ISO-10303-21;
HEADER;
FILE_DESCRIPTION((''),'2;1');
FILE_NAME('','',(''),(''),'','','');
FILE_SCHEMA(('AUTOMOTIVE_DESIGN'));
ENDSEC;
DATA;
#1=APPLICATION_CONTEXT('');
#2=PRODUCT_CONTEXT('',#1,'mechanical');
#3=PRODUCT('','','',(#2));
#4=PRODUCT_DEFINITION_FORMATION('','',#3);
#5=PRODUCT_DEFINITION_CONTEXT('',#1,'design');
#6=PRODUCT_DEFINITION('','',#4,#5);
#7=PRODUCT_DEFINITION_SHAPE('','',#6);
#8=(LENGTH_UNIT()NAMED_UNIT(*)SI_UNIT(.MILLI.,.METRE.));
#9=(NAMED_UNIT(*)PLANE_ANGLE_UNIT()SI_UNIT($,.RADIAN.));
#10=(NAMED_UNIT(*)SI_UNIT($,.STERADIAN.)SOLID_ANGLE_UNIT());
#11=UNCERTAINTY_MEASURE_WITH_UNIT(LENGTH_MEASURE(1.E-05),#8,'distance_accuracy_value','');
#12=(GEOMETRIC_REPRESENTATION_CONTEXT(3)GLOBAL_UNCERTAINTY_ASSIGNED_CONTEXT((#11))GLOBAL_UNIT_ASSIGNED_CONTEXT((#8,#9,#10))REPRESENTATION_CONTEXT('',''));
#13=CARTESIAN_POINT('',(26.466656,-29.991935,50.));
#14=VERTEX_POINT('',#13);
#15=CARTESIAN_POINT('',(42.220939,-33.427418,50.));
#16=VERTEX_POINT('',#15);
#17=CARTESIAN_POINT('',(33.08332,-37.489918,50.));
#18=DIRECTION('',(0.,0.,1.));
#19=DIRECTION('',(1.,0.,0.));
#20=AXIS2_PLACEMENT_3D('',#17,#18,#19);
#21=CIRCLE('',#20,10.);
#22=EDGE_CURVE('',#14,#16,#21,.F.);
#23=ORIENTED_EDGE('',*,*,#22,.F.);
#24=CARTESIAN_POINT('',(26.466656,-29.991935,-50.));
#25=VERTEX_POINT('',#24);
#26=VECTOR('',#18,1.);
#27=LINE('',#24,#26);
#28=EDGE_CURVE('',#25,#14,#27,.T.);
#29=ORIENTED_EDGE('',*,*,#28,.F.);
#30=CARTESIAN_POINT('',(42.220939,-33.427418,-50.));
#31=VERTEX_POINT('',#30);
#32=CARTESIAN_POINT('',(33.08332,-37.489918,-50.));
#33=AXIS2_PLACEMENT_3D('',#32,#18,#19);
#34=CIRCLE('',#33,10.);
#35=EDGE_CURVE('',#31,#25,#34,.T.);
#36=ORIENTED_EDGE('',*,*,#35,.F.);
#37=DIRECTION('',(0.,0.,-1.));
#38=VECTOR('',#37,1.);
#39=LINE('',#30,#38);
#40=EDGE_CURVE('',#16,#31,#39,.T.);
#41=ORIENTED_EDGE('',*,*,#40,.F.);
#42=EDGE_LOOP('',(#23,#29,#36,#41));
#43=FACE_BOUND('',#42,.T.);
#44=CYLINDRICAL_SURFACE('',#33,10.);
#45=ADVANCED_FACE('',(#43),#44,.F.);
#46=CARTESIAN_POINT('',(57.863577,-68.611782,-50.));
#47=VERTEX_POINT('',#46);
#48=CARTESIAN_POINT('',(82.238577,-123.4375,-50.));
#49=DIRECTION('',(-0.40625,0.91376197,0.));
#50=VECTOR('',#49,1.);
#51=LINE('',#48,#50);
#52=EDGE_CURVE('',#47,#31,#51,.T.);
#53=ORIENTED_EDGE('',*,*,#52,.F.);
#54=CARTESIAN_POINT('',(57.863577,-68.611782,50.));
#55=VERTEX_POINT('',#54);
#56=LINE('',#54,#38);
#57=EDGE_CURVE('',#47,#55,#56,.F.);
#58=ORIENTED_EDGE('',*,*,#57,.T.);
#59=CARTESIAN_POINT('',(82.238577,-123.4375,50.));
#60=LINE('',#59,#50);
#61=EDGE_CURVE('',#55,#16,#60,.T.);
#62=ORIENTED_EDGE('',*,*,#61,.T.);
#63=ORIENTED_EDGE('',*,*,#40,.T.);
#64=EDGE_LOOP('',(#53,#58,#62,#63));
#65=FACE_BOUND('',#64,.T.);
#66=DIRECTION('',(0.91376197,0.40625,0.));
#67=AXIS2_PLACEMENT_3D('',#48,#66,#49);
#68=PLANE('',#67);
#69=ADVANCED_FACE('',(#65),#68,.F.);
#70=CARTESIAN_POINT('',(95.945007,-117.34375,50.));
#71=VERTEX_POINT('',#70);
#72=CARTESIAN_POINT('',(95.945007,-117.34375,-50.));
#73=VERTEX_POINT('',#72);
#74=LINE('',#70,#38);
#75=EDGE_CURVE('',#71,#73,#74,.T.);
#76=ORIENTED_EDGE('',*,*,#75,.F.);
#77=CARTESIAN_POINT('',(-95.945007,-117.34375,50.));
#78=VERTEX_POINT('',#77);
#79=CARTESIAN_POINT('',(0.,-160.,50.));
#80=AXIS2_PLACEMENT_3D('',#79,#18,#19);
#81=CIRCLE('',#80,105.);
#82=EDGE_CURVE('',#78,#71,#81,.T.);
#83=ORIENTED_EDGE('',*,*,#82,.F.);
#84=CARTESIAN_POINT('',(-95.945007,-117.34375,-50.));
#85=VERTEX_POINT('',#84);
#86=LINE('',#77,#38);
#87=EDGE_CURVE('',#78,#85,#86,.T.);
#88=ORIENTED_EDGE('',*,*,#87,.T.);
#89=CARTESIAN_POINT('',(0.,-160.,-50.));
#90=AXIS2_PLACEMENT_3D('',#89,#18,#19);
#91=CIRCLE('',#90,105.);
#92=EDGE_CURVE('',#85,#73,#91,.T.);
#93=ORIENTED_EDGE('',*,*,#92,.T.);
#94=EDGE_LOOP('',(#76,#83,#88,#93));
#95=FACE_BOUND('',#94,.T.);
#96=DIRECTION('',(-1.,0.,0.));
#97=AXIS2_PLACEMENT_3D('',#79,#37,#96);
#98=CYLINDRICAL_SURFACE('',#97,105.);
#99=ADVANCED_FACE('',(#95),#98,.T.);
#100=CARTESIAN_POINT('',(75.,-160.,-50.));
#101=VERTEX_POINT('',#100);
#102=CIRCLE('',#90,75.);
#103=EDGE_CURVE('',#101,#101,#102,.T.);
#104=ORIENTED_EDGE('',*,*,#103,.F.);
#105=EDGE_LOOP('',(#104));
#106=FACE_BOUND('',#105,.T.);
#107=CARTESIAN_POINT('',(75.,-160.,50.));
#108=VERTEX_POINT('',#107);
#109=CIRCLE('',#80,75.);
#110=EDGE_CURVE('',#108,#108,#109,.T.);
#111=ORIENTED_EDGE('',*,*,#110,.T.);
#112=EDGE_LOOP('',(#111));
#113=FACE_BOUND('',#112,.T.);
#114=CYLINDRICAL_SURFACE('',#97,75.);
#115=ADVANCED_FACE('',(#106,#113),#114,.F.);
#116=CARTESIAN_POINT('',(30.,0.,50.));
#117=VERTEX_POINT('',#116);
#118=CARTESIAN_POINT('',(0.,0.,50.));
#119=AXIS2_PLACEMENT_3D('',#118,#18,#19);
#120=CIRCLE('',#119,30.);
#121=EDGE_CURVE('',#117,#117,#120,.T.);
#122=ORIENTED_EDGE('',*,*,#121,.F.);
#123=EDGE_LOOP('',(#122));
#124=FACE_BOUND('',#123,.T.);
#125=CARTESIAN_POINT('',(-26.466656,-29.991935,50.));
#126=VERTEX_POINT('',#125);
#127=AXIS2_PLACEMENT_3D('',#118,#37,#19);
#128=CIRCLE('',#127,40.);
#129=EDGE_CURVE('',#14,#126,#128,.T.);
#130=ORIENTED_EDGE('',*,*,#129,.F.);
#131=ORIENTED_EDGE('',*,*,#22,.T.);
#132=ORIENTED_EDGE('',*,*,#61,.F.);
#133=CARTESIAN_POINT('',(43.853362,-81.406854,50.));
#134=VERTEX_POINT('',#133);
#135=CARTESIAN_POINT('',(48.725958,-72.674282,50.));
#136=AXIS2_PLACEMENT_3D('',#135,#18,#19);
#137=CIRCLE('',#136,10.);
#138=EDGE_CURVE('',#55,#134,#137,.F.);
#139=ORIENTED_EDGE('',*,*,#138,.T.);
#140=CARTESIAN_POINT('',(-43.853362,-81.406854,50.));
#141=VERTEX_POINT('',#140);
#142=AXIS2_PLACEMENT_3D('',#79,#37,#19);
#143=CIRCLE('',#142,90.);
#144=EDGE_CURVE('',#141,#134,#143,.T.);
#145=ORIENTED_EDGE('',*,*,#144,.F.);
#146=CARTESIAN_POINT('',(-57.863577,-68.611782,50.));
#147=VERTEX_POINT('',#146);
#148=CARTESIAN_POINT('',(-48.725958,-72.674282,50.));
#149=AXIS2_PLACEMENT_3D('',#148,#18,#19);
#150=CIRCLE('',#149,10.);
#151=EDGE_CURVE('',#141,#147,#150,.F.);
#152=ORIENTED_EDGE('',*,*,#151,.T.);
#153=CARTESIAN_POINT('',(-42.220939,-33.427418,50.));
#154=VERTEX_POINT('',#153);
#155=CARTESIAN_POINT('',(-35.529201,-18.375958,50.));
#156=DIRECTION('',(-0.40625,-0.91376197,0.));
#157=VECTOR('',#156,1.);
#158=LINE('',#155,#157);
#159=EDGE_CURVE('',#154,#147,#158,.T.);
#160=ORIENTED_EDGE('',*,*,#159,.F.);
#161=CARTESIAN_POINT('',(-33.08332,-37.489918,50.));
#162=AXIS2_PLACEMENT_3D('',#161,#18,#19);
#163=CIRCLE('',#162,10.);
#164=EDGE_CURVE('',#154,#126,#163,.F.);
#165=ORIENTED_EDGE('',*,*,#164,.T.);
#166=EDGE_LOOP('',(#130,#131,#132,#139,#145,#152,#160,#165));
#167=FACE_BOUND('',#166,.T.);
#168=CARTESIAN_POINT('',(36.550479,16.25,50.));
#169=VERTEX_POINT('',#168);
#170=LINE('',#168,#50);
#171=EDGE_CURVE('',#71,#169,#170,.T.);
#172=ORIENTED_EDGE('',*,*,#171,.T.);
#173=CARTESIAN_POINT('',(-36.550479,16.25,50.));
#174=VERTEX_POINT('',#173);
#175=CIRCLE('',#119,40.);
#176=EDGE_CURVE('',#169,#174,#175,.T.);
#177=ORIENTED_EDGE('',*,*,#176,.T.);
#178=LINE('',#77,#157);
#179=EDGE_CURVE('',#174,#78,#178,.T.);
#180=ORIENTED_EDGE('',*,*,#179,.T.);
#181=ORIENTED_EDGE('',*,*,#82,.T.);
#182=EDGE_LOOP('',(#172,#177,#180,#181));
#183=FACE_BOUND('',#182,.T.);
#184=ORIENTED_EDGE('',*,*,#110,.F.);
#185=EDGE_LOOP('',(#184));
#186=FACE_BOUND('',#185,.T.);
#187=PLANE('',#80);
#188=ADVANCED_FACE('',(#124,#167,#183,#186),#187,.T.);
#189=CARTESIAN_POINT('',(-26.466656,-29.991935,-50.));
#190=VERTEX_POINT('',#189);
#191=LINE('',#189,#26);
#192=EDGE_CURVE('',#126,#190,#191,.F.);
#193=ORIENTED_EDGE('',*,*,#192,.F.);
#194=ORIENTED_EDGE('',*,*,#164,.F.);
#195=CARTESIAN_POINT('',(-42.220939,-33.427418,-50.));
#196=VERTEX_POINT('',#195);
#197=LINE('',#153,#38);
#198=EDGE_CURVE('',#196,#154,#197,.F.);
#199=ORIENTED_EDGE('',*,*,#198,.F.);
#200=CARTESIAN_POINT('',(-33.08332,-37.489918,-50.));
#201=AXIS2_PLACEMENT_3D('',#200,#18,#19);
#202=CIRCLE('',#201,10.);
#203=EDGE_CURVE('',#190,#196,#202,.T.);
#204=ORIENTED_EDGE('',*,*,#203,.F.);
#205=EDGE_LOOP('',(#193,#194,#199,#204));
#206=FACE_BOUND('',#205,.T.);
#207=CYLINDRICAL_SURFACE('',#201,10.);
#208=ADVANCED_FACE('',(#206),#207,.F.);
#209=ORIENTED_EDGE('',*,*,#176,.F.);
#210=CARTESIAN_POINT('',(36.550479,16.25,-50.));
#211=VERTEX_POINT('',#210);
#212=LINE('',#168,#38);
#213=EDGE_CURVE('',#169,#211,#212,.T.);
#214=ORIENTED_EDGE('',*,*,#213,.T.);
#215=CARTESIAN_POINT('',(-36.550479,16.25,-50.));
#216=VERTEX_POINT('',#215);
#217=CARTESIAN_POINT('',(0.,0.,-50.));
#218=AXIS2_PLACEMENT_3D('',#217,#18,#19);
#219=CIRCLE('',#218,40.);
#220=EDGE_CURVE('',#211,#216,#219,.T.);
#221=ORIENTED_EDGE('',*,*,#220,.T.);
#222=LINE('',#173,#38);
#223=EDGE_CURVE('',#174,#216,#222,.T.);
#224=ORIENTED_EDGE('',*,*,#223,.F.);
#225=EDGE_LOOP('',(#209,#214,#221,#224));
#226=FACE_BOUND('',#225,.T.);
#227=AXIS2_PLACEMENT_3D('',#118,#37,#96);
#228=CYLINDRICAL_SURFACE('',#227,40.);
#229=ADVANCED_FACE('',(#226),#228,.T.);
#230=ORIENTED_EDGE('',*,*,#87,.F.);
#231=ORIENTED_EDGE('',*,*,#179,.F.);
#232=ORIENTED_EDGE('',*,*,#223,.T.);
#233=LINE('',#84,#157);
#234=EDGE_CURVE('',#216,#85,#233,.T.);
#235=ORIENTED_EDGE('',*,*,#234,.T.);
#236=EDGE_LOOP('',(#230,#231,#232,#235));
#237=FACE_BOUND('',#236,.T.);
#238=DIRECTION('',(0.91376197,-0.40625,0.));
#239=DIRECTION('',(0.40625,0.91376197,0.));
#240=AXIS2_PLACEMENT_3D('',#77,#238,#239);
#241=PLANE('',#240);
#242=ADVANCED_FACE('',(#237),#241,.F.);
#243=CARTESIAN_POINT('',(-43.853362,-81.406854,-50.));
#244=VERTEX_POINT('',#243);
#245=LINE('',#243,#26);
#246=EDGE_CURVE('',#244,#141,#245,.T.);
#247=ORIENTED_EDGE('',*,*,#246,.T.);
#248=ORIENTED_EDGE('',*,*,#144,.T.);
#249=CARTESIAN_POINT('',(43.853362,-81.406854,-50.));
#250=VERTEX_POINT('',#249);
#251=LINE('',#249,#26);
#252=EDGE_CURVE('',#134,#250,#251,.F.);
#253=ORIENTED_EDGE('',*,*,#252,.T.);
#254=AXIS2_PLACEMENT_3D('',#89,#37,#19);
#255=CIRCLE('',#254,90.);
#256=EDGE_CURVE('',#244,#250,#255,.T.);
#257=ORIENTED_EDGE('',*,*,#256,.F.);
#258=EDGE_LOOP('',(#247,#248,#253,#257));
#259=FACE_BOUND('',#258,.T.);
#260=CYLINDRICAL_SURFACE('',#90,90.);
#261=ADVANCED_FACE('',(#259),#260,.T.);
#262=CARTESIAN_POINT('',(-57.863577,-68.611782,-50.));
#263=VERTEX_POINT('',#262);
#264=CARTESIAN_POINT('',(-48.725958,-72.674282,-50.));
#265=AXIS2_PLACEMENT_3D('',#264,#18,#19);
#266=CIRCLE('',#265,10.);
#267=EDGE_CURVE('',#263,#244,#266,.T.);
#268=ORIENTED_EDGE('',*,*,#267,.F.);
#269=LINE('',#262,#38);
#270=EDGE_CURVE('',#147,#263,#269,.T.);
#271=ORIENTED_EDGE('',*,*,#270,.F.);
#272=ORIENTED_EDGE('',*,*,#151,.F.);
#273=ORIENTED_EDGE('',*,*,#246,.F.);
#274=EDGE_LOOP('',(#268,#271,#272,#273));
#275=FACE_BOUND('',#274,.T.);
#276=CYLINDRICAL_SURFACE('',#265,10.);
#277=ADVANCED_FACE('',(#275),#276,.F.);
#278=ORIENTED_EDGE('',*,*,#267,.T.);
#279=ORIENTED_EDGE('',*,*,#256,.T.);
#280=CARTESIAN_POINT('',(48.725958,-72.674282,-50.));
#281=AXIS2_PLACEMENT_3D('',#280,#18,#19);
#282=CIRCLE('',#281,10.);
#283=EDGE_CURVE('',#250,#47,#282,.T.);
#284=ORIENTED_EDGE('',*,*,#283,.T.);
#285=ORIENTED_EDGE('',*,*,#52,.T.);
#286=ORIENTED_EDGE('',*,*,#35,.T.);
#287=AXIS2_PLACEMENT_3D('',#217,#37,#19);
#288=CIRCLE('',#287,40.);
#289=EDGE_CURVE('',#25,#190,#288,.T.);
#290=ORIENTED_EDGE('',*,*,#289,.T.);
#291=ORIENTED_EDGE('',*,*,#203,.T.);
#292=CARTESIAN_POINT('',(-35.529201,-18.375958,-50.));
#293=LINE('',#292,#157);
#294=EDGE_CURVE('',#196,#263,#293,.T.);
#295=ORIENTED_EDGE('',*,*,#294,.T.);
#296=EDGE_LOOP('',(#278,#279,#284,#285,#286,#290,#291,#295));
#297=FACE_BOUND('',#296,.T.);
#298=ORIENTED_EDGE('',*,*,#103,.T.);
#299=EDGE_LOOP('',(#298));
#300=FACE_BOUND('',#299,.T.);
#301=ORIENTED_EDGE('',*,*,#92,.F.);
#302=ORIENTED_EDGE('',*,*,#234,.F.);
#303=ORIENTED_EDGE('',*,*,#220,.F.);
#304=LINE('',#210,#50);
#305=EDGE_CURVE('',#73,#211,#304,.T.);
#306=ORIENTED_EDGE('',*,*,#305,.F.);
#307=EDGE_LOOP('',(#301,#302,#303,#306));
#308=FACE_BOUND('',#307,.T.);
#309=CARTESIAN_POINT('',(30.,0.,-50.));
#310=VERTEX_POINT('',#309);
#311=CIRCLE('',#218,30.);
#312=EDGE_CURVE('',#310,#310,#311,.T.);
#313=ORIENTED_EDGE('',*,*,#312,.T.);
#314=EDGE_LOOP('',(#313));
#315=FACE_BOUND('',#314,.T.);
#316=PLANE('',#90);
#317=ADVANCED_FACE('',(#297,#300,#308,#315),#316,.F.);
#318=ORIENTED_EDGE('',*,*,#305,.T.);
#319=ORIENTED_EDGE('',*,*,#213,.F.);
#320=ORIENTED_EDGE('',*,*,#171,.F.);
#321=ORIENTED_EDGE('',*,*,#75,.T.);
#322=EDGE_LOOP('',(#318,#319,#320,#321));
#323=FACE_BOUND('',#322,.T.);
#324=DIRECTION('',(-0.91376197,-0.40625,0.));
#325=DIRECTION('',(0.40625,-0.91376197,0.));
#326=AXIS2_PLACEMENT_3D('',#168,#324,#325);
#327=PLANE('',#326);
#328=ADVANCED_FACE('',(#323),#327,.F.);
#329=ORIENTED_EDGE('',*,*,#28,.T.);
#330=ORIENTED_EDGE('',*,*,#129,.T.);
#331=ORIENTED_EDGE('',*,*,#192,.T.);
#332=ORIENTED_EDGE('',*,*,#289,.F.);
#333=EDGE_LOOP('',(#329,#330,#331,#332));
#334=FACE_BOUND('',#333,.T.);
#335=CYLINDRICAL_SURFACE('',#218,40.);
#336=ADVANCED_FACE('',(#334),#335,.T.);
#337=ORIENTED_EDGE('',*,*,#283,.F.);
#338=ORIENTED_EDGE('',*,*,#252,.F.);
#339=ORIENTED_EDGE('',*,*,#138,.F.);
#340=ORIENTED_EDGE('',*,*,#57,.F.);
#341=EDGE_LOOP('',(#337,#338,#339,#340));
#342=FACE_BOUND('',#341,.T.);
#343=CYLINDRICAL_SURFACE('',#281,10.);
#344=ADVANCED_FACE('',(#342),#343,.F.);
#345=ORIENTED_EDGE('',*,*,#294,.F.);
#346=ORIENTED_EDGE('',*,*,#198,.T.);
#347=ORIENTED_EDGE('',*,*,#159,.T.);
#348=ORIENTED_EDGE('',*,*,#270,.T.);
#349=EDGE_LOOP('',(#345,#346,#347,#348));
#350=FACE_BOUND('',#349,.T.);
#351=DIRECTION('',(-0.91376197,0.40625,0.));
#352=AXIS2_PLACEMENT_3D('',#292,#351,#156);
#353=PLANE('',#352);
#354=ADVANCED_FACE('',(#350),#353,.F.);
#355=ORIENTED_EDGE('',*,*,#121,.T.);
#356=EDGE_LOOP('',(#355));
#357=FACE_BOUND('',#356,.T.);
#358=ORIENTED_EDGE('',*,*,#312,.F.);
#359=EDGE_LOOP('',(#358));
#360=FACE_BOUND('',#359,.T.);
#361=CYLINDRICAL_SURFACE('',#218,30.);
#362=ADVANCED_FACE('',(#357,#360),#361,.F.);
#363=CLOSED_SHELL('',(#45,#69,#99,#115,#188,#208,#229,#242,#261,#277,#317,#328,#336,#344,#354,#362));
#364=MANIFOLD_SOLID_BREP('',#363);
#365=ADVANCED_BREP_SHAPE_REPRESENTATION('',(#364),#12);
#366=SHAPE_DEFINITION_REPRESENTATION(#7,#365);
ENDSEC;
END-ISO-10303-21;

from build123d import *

# Parameters (mm, degrees)
SKETCH1_R               = 75
BOSS_EXTRUDE1_DEPTH     = 50
CUT_EXTRUDE1_DEPTH      = 290.39592257
CUT_EXTRUDE1_DEPTH_BACK = 290.39592257
FILLET1_START           = -50
FILLET1_DEPTH           = 100
SKETCH3_R               = 30
CUT_EXTRUDE2_DEPTH      = 303.07614934


with BuildPart() as part:
    # Sketch1 → Boss-Extrude1 (new, symmetric)
    with BuildSketch(Plane.XY):
        with BuildLine():
            Line((-95.945006832, -117.34375), (-36.550478793, 16.25))
            ThreePointArc((-36.550478793, 16.25), (0, 40), (36.550478793, 16.25))
            Line((36.550478793, 16.25), (95.945006832, -117.34375))
            ThreePointArc((95.945006832, -117.34375), (0, -265), (-95.945006832, -117.34375))
        make_face()
        with Locations((0, -160)):
            Circle(SKETCH1_R, mode=Mode.SUBTRACT)
    extrude(amount=BOSS_EXTRUDE1_DEPTH, both=True)

    # Sketch2 → Cut-Extrude1 (cut, two sides: drawn at the far end of the back side and taken through both)
    with BuildSketch(Plane.XY.offset(-CUT_EXTRUDE1_DEPTH_BACK)):
        with BuildLine():
            Line((-35.52920143, -18.375958363), (-82.238577284, -123.4375))
            ThreePointArc((-82.238577284, -123.4375), (0, -70), (82.238577284, -123.4375))
            Line((82.238577284, -123.4375), (35.52920143, -18.375958363))
            ThreePointArc((35.52920143, -18.375958363), (0, -40), (-35.52920143, -18.375958363))
        make_face()
    extrude(amount=CUT_EXTRUDE1_DEPTH + CUT_EXTRUDE1_DEPTH_BACK, mode=Mode.SUBTRACT)

    # Fillet1: read off the stored shape, not the designer's step
    # Fillet1 outline → Fillet1 (add)
    with BuildSketch(Plane.XY.offset(FILLET1_START)):
        with BuildLine():
            ThreePointArc((-42.220939274, -33.427418189), (-35.213916082, -27.719526256), (-26.466655661, -29.991934551))
            ThreePointArc((-26.466655661, -29.991934551), (-31.537347698, -24.604790188), (-35.52920143, -18.375958363))
            Line((-35.52920143, -18.375958363), (-42.220939274, -33.427418189))
        make_face()
        with BuildLine():
            ThreePointArc((35.52920143, -18.375958363), (31.537347698, -24.604790188), (26.466655661, -29.991934551))
            ThreePointArc((26.466655661, -29.991934551), (35.213916082, -27.719526256), (42.220939274, -33.427418189))
            Line((42.220939274, -33.427418189), (35.52920143, -18.375958363))
        make_face()
        with BuildLine():
            ThreePointArc((-43.853361827, -81.406853629), (-55.469552548, -80.058313703), (-57.863577284, -68.61178181))
            Line((-57.863577284, -68.61178181), (-82.238577284, -123.4375))
            ThreePointArc((-82.238577284, -123.4375), (-66.45628703, -99.30764534), (-43.853361827, -81.406853629))
        make_face()
        with BuildLine():
            Line((82.238577284, -123.4375), (57.863577284, -68.61178181))
            ThreePointArc((57.863577284, -68.61178181), (55.469552548, -80.058313703), (43.853361827, -81.406853629))
            ThreePointArc((43.853361827, -81.406853629), (66.45628703, -99.30764534), (82.238577284, -123.4375))
        make_face()
    extrude(amount=FILLET1_DEPTH)

    # Sketch3 → Cut-Extrude2 (cut, through all)
    with BuildSketch(Plane.XY.offset(50)):
        Circle(SKETCH3_R)
    extrude(amount=-CUT_EXTRUDE2_DEPTH, mode=Mode.SUBTRACT)


solid = part.part
